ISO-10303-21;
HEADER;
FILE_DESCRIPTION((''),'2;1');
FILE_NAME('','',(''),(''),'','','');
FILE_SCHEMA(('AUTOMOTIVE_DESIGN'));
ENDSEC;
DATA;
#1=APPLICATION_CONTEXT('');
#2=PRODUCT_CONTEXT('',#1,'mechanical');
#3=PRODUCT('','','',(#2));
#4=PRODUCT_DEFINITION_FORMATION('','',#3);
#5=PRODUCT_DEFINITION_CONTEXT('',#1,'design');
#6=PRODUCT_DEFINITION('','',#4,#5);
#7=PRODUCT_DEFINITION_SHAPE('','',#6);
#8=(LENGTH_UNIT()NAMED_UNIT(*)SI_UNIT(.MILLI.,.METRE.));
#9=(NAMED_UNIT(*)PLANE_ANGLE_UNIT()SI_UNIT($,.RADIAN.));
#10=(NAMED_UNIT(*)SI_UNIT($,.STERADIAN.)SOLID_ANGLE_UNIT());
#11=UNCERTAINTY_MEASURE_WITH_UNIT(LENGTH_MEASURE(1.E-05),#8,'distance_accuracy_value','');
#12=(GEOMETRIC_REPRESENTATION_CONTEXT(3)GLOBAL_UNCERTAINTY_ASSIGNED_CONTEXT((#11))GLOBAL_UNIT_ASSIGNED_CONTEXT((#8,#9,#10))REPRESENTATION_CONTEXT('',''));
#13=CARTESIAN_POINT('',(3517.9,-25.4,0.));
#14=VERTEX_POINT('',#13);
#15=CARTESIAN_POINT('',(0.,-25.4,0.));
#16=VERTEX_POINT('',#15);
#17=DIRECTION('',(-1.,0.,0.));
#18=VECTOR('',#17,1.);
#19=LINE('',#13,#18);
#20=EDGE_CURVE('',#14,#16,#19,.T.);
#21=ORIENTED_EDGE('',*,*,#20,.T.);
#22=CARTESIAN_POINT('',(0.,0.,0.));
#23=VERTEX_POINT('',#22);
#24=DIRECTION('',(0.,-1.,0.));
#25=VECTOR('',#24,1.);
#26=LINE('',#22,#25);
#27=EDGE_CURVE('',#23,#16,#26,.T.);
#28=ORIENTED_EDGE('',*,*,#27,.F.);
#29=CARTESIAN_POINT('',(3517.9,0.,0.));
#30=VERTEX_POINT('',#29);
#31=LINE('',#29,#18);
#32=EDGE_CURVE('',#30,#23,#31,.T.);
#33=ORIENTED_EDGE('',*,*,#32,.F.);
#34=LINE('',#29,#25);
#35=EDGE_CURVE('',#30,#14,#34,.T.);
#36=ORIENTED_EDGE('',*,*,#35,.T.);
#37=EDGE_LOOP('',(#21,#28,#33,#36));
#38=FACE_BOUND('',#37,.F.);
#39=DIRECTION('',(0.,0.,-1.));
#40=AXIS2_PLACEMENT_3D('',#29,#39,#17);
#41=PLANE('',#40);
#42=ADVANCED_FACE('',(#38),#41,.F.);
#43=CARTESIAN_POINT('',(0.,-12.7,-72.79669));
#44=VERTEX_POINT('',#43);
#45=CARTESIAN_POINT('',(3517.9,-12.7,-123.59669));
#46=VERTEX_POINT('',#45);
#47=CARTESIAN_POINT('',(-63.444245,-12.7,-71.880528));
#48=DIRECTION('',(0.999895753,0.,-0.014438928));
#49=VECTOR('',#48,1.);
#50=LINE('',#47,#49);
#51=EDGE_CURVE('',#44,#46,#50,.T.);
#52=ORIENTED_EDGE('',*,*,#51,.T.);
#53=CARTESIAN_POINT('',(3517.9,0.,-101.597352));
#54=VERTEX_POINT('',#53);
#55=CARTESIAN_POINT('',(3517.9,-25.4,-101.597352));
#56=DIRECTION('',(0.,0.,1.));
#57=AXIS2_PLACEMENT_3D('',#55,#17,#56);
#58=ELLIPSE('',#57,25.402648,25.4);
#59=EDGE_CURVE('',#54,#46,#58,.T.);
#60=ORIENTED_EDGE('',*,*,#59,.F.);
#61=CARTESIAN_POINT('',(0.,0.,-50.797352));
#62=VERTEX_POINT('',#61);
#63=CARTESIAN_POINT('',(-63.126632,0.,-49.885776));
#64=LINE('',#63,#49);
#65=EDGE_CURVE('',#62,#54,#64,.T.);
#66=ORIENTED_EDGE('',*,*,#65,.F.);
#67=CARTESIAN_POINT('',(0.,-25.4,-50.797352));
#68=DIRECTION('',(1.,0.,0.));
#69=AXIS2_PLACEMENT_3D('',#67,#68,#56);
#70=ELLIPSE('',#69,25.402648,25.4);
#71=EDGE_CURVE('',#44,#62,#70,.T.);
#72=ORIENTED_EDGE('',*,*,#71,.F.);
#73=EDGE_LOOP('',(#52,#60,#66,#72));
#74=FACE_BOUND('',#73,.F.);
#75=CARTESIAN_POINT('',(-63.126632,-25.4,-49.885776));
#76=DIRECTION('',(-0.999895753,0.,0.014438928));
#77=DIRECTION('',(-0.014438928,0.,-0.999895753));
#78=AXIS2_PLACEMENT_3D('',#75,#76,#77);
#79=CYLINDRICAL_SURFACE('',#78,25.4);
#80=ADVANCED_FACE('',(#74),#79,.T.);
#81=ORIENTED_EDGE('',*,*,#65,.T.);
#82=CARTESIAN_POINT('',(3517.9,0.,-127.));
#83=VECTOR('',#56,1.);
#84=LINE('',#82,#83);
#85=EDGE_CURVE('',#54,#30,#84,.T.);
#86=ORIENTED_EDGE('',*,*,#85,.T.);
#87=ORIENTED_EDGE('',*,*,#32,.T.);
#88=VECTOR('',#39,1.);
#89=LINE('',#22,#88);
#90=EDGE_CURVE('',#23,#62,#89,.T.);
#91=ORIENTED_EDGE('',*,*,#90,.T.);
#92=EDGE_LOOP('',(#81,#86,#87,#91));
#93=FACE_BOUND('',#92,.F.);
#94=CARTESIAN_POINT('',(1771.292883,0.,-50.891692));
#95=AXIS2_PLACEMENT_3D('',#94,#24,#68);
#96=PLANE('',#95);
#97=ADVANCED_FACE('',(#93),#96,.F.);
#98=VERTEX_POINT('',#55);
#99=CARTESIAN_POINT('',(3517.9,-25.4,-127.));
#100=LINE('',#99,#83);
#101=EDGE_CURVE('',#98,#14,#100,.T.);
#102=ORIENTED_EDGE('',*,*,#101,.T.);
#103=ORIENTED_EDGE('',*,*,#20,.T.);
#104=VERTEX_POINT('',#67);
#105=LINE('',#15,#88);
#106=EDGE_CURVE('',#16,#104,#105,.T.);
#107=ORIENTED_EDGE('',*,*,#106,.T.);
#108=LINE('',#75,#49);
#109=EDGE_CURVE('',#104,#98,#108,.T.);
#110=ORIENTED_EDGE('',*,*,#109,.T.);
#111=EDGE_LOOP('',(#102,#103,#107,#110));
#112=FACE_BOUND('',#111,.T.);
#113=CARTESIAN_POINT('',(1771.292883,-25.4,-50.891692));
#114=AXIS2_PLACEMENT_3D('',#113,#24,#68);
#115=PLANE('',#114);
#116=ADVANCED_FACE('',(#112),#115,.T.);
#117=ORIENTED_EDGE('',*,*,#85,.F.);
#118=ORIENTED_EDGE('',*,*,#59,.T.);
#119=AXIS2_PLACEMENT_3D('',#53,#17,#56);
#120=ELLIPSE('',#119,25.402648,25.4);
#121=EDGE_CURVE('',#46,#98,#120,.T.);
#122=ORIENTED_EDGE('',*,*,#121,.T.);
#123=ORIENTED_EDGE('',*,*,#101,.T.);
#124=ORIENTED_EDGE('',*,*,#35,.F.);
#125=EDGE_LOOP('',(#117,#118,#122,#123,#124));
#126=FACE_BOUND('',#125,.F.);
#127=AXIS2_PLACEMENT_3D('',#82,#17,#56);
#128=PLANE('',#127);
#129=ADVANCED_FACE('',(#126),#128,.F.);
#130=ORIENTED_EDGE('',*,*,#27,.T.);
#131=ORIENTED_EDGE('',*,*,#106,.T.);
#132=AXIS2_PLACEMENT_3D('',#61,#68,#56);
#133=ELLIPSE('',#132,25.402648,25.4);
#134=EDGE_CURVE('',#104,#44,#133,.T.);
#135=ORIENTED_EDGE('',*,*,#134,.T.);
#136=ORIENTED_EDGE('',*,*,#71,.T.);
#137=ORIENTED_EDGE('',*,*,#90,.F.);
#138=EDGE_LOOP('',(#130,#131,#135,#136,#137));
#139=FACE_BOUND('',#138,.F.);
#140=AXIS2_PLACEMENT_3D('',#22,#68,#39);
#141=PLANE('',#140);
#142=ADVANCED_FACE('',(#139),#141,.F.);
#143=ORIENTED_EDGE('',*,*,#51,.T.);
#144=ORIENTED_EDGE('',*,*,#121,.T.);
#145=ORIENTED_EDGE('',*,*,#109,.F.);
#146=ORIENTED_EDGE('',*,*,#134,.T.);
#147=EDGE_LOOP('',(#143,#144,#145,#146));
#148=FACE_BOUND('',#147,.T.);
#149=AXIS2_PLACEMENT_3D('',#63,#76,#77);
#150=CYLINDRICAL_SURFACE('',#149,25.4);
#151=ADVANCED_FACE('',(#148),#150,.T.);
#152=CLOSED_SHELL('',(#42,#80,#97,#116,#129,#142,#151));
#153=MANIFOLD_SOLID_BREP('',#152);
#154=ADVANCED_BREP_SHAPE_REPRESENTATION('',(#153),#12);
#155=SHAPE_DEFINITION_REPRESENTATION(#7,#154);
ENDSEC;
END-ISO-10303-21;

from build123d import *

# Parameters (mm, degrees)
F1_DEPTH    = 25.4
F2_T1_DEPTH = 3645.2667678844


# Not quite as in the source:
# - a fillet or chamfer that OpenCascade refuses, or shapes differently, is made with other operations: its cross-section is extruded or revolved along the edge and cut away or added


with BuildPart() as f1:
    # F0 (on Front) → F1 (new body)
    with BuildSketch(Plane.XZ):
        Polygon((3517.9, 0), (0, 0), (0, -76.2), (3517.9, -127), align=None)
    extrude(amount=F1_DEPTH)

    # F2: fillet of radius 25.4 on 2 edges, made by hand

    # F2_s2 → F2_t1 (cut)
    with BuildSketch(Plane(origin=(-62.3932487266, 0, 0.9009855412), x_dir=(0, 1, 0), z_dir=(0.9998957532, 0, -0.0144389278))):
        with BuildLine():
            ThreePointArc((0, -76.1920563975), (-17.9605122421, -68.7525686396), (-25.4, -50.7920563975))
            Line((-25.4, -50.7920563975), (-25.4, -76.1920563975))
            Line((-25.4, -76.1920563975), (0, -76.1920563975))
        make_face()
        with BuildLine():
            ThreePointArc((-25.4, -76.1920563975), (-7.4394877579, -68.7525686396), (0, -50.7920563975))
            Line((0, -50.7920563975), (0, -76.1920563975))
            Line((0, -76.1920563975), (-25.4, -76.1920563975))
        make_face()
    extrude(amount=F2_T1_DEPTH, mode=Mode.SUBTRACT)


solid = f1.part
